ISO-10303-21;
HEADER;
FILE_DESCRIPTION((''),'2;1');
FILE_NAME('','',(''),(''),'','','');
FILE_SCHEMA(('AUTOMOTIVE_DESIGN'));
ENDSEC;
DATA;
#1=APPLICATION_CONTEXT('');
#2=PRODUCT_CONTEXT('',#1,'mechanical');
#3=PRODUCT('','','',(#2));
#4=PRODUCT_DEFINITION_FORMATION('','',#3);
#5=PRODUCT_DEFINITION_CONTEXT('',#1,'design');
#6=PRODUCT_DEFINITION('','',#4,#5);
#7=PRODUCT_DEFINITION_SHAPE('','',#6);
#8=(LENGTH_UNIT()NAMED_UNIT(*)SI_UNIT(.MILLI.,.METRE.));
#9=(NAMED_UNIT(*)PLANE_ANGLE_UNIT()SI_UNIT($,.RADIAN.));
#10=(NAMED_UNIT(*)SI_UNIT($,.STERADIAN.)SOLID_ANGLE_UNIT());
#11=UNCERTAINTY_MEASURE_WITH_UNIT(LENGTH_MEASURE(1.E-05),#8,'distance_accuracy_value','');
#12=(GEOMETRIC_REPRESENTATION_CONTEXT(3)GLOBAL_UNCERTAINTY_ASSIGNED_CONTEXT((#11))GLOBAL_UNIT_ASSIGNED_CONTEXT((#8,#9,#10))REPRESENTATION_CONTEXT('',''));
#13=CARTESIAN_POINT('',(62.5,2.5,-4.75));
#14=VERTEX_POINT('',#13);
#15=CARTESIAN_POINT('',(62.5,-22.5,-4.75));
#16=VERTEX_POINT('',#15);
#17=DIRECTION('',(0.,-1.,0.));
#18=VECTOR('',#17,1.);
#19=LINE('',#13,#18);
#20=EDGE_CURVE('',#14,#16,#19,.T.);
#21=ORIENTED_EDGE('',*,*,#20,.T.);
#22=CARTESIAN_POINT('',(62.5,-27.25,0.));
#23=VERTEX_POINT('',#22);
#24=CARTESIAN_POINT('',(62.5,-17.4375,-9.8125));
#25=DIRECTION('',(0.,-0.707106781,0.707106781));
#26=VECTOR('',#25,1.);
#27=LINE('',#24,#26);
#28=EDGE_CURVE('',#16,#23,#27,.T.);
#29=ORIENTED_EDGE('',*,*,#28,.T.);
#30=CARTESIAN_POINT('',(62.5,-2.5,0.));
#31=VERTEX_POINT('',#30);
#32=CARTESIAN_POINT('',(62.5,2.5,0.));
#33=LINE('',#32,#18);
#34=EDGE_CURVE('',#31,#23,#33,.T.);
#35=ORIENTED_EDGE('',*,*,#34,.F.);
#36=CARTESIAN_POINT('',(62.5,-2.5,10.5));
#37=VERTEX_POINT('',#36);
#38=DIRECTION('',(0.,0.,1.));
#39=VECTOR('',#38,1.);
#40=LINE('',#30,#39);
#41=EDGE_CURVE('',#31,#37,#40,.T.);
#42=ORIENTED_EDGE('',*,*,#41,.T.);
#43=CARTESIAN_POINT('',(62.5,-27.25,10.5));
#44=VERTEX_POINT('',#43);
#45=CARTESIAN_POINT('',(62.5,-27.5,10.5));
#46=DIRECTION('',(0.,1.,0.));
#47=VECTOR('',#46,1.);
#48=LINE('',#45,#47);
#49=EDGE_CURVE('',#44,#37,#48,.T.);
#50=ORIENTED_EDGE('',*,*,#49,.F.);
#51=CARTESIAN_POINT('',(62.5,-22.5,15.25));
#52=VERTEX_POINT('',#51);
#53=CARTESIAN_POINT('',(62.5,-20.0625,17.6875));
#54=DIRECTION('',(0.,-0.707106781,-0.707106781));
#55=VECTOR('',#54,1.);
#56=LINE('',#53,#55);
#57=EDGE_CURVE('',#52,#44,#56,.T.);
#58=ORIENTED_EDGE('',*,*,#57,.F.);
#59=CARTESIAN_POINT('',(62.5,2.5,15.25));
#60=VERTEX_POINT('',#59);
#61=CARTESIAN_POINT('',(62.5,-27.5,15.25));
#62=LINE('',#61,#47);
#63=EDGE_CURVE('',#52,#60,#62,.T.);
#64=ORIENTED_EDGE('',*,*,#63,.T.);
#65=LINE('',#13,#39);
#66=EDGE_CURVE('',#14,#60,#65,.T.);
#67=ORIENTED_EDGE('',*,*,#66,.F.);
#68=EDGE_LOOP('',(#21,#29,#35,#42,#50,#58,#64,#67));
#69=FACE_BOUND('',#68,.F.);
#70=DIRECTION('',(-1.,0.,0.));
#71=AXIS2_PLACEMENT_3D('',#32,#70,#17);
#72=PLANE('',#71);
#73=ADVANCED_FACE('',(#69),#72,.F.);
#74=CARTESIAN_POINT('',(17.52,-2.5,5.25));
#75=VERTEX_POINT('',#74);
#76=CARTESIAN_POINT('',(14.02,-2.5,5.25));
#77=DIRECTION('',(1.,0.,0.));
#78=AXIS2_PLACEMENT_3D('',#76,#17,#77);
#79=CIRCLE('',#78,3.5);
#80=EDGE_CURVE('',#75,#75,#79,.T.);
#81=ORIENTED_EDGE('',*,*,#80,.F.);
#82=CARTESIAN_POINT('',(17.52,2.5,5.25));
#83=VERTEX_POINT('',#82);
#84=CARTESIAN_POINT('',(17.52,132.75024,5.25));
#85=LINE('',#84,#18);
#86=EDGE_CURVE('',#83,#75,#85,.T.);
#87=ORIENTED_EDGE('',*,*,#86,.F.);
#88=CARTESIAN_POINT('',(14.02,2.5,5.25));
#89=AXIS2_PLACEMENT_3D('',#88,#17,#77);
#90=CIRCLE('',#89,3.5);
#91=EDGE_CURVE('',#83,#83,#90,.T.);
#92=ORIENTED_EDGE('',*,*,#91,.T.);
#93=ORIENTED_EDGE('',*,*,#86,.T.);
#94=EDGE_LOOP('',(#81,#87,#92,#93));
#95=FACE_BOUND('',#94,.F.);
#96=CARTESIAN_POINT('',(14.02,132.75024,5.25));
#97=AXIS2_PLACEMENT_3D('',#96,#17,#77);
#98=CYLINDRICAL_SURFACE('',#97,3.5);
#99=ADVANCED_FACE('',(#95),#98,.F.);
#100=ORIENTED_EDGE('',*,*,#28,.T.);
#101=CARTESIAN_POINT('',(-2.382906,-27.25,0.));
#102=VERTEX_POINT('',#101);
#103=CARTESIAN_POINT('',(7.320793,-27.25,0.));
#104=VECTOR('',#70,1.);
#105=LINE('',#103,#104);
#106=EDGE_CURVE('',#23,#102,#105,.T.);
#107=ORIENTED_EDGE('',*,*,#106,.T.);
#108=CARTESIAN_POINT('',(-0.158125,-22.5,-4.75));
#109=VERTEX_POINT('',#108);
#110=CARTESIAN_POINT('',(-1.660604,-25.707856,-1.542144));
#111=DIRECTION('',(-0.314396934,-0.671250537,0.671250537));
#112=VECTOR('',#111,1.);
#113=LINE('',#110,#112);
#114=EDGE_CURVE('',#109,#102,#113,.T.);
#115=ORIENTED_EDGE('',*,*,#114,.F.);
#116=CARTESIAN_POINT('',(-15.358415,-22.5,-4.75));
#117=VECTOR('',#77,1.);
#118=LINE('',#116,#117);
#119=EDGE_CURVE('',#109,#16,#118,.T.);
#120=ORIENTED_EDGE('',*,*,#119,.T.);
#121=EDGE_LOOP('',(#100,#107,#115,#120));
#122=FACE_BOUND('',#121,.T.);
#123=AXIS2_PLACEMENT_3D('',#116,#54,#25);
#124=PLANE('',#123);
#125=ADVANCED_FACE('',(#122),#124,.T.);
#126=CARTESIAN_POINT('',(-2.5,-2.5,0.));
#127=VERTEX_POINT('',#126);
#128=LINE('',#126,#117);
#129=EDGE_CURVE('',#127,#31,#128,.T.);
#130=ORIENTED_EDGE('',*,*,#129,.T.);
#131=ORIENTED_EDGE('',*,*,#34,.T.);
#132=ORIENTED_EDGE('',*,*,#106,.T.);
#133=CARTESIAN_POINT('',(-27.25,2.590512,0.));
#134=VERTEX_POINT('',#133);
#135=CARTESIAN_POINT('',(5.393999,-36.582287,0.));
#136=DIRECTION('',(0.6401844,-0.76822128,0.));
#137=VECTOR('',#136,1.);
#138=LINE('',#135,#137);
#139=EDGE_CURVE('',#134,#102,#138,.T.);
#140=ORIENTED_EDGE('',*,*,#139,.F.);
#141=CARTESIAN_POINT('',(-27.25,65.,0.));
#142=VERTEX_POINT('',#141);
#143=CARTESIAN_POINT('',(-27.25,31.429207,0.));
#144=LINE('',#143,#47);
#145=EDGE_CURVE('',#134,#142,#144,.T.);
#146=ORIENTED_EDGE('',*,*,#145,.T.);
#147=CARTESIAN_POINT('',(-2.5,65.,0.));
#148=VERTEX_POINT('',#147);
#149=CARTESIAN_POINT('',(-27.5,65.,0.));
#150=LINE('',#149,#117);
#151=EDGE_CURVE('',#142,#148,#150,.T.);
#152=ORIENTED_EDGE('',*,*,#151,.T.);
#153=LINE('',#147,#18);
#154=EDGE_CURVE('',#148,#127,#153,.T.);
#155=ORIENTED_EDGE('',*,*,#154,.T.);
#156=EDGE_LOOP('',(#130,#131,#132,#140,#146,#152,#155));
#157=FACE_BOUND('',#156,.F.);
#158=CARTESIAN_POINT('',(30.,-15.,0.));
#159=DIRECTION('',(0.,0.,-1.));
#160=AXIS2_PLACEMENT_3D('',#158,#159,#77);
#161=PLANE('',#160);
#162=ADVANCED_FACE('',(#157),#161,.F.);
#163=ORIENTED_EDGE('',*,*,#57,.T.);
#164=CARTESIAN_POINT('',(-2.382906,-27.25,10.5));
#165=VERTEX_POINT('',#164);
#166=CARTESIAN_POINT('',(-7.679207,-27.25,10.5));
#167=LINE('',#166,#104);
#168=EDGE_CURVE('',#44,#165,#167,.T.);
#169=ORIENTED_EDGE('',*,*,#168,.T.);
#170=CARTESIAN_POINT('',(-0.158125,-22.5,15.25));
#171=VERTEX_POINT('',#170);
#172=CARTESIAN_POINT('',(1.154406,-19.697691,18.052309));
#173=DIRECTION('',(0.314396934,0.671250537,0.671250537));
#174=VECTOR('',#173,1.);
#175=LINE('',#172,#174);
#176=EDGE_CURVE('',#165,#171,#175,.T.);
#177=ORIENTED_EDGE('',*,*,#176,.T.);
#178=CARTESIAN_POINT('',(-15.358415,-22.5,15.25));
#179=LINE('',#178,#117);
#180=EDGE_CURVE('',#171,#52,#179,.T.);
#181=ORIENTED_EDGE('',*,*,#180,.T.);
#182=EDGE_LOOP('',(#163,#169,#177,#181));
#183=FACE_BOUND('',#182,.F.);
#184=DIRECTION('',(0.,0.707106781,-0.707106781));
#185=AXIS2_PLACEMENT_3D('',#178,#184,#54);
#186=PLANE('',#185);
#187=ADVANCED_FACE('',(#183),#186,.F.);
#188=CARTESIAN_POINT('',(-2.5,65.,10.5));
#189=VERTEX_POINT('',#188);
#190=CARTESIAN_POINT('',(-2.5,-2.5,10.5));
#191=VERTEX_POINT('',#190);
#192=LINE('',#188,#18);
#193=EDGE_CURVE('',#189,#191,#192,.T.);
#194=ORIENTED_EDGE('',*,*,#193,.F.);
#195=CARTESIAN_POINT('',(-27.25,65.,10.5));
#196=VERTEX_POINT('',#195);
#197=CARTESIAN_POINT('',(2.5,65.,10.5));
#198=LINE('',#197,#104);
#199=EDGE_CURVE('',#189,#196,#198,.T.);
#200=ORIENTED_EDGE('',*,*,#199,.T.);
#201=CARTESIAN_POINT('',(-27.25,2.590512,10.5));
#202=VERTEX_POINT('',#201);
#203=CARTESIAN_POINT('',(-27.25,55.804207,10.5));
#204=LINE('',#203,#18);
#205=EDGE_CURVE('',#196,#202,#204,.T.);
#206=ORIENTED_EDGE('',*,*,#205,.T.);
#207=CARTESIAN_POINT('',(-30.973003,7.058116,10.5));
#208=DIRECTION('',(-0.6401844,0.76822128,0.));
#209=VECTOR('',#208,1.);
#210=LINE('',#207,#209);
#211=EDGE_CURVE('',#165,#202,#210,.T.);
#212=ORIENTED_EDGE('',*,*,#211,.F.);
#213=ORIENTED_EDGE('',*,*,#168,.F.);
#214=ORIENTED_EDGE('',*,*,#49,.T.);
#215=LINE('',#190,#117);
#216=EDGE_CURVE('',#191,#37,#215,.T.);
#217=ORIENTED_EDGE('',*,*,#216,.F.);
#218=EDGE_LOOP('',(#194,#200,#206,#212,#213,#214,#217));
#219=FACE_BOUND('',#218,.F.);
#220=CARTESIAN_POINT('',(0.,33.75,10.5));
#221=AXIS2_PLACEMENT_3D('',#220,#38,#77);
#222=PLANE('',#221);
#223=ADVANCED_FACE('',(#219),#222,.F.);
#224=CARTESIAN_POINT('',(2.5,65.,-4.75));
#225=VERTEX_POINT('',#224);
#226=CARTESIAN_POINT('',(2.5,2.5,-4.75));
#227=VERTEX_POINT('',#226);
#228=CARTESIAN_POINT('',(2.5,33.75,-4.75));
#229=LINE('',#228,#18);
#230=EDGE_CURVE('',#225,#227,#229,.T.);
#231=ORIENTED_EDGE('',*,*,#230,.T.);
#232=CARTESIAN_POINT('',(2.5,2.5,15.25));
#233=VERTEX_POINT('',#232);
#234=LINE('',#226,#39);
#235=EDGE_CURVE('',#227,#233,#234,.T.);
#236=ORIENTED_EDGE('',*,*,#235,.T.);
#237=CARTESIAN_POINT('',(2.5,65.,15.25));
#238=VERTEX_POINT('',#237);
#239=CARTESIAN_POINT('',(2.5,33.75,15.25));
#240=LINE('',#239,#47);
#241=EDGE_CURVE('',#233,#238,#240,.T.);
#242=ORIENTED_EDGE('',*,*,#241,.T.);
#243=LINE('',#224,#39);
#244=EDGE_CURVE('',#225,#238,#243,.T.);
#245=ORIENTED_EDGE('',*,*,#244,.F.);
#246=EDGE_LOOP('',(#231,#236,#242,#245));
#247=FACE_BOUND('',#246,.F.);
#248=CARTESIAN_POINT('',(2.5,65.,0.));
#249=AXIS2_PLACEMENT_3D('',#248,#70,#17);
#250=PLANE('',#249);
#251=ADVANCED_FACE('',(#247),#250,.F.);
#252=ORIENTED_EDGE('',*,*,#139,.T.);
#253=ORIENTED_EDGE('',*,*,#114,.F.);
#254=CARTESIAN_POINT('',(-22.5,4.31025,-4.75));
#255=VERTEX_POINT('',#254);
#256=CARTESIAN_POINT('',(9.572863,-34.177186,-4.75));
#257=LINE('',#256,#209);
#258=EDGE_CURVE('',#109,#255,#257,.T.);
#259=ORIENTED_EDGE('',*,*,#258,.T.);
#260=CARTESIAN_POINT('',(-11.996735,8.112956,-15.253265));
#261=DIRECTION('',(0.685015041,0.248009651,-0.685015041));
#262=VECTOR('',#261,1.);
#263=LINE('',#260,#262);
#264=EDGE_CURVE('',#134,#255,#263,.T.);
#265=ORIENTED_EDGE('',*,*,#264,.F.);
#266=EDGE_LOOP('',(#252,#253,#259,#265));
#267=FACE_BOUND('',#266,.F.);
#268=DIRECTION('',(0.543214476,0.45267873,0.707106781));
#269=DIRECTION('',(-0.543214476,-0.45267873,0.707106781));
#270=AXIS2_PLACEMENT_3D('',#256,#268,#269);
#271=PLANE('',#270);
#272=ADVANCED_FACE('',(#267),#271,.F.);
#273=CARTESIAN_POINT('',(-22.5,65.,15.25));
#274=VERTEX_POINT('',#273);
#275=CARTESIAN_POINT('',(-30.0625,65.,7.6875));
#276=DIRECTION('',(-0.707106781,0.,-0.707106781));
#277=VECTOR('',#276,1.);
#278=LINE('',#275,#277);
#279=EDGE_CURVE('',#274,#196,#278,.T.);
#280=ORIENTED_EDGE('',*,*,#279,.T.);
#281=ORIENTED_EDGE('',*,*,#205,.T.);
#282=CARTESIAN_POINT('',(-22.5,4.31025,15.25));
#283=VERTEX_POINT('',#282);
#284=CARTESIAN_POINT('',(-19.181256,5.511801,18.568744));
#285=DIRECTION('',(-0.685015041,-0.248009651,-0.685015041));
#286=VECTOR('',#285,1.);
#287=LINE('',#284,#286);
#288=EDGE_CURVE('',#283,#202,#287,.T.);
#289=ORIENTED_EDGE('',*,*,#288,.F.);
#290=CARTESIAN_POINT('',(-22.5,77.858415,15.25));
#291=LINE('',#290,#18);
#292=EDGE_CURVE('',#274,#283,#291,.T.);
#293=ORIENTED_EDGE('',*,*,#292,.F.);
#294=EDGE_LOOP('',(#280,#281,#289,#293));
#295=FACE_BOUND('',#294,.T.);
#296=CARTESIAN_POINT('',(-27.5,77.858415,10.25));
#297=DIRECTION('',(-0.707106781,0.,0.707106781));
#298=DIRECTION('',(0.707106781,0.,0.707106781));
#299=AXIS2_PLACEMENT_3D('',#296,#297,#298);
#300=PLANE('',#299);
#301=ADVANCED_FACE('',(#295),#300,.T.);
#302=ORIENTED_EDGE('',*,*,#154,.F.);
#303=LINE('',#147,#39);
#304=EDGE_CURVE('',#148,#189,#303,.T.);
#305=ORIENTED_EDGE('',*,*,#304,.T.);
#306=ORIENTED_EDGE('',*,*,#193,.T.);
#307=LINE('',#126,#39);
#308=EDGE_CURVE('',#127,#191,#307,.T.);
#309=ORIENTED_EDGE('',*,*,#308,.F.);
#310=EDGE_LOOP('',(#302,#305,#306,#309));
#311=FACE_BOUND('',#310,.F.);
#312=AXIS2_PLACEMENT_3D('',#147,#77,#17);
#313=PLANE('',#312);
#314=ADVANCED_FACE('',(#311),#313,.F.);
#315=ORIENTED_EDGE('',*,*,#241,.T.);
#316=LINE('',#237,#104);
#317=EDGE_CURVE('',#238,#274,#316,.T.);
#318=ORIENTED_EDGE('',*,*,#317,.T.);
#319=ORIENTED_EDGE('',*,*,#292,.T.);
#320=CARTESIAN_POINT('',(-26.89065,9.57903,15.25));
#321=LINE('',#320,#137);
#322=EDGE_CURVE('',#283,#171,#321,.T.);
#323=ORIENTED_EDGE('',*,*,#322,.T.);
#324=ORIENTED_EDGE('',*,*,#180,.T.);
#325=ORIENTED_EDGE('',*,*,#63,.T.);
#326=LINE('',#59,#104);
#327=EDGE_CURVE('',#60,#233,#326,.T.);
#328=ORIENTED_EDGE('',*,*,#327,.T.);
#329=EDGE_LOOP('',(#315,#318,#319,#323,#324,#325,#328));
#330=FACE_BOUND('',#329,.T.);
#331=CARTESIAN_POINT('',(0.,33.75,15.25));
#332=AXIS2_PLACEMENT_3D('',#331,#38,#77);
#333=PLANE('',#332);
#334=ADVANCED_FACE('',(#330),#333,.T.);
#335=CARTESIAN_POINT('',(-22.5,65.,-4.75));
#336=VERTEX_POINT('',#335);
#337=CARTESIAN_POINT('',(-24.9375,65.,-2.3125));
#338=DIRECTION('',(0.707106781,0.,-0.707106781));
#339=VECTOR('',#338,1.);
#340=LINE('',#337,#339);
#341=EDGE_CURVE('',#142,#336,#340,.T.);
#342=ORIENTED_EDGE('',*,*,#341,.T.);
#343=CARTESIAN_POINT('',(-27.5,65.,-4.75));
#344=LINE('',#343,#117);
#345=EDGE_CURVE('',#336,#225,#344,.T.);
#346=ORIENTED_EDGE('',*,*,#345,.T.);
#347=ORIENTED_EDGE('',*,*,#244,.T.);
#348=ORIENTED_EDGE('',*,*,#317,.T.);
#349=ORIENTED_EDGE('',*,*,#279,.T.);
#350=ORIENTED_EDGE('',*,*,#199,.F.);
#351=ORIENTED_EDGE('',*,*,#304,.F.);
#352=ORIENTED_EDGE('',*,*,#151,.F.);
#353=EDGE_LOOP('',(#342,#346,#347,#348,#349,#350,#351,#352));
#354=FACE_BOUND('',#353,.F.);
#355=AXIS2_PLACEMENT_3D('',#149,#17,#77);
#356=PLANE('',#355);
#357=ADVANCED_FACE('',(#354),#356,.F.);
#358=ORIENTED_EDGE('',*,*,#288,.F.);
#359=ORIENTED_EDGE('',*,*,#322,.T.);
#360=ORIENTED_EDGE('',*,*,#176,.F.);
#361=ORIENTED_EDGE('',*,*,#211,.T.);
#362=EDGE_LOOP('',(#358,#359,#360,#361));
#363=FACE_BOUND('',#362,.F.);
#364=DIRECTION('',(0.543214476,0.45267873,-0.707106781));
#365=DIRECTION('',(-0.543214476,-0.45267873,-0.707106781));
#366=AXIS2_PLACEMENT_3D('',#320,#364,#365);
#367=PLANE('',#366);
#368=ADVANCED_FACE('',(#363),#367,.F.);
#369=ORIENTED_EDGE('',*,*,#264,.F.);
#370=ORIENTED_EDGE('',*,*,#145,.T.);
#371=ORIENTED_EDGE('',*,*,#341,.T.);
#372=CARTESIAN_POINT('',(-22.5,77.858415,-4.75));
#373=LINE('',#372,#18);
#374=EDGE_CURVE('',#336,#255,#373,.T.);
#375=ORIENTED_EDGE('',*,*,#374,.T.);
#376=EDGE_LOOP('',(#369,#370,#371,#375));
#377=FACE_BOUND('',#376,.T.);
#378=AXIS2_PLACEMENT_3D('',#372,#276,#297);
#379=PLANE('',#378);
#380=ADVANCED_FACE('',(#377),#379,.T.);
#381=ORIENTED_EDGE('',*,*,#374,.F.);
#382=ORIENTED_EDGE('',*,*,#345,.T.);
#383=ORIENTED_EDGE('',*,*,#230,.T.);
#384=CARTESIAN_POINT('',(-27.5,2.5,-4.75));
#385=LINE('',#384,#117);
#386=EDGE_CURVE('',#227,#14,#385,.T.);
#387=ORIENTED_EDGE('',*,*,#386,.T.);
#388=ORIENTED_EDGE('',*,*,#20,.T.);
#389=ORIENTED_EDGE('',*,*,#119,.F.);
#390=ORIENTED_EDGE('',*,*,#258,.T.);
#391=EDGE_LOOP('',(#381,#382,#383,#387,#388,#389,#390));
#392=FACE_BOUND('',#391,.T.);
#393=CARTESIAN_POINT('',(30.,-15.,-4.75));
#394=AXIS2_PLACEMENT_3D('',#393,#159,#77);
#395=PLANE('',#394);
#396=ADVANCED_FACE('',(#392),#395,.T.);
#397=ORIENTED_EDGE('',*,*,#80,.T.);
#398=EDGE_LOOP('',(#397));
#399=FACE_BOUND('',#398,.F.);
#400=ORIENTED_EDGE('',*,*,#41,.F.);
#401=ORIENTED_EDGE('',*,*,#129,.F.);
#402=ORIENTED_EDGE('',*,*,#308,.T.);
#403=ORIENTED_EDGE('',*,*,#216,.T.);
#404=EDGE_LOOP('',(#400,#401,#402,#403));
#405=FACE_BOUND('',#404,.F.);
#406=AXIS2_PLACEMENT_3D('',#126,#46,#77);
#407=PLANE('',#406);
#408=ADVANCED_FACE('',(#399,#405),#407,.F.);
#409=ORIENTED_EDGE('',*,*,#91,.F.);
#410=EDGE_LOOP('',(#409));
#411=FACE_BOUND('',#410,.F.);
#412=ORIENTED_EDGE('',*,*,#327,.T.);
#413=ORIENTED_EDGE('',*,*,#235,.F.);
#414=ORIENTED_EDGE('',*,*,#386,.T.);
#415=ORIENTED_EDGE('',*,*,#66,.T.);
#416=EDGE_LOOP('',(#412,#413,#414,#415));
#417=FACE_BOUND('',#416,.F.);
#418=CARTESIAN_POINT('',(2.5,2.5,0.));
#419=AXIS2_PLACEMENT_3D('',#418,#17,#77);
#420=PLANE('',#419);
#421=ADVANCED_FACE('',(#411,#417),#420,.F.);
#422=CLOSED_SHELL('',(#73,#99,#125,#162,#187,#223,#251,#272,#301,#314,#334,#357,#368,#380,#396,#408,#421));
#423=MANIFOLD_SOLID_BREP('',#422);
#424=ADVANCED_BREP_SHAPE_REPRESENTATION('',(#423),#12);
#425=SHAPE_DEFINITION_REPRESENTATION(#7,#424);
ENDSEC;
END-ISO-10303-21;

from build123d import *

# Parameters (mm, degrees)
F0_W        = 5
F0_H        = 62.5
F0_H_2      = 5
F0_W_2      = 60
F1_DEPTH    = 10.5
F2_W        = 5
F2_H        = 62.5
F2_W_2      = 25
F2_W_3      = 65
F2_H_2      = 25
F3_DEPTH    = 4.75
F4_W        = 65
F4_H        = 25
F4_W_2      = 5
F4_H_2      = 62.5
F4_W_3      = 25
F5_DEPTH    = 4.75
F6_T1_DEPTH = 88.2168298797
F7_T1_DEPTH = 56.9578285833
F7_T3_DEPTH = 90.7168298797
F7_T5_DEPTH = 88.2168298797
F7_T7_DEPTH = 64.7680782592
F9_D        = 7


# Not quite as in the source:
# - a fillet or chamfer that OpenCascade refuses, or shapes differently, is made with other operations: its cross-section is extruded or revolved along the edge and cut away or added


with BuildPart() as f1:
    # F0 (on Top) → F1 (new body)
    with BuildSketch(Plane.XY):
        with Locations((0, 33.75)):
            Rectangle(F0_W, F0_H)
        Rectangle(F0_W, F0_H_2)
        with Locations((32.5, 0)):
            Rectangle(F0_W_2, F0_H_2)
    extrude(amount=F1_DEPTH)

    # F2 (on face) → F3 (join)
    with BuildSketch(Plane.XY.offset(10.5)):
        with Locations((0, 33.75)):
            Rectangle(F2_W, F2_H)
        Polygon((2.5, 2.5), (-2.5, 2.5), (-2.5, -2.5), (62.5, -2.5), (62.5, 2.5), align=None)
        Polygon((-2.5, -2.5), (-2.5, 2.5), (-27.5, 2.5), (-2.5, -27.5), align=None)
        with Locations((-15, 33.75)):
            Rectangle(F2_W_2, F2_H)
        with Locations((30, -15)):
            Rectangle(F2_W_3, F2_H_2)
    extrude(amount=F3_DEPTH)

    # F4 (on face) → F5 (join)
    with BuildSketch(Plane(origin=(0, 0, 0), x_dir=(1, 0, 0), z_dir=(0, 0, -1))):
        with Locations((30, 15)):
            Rectangle(F4_W, F4_H)
        Polygon((2.5, -2.5), (62.5, -2.5), (62.5, 2.5), (-2.5, 2.5), (-2.5, -2.5), align=None)
        Polygon((-27.5, -2.5), (-2.5, -2.5), (-2.5, 2.5), (-2.5, 27.5), align=None)
        with Locations((0, -33.75)):
            Rectangle(F4_W_2, F4_H_2)
        with Locations((-15, -33.75)):
            Rectangle(F4_W_3, F4_H_2)
    extrude(amount=F5_DEPTH)

    # F6: chamfer of 5 on 1 edges, made by hand

    # F6_s2 → F6_t1 (cut)
    with BuildSketch(Plane.XZ.offset(-77.8584149398)):
        Polygon((-27.5, 10.25), (-22.5, 15.25), (-27.5, 15.25), align=None)
    extrude(amount=F6_T1_DEPTH, mode=Mode.SUBTRACT)

    # F7: chamfer of 5 on 5 edges, made by hand

    # F7_s2 → F7_t1 (cut)
    with BuildSketch(Plane(origin=(-15.7317566489, 18.8781079787, 0), x_dir=(0, 0, 1), z_dir=(0.6401843997, -0.7682212796, 0))):
        Polygon((15.25, 14.5256241898), (10.25, 19.5256241898), (15.25, 19.5256241898), align=None)
    extrude(amount=F7_T1_DEPTH, mode=Mode.SUBTRACT)

    # F7_s4 → F7_t3 (cut)
    with BuildSketch(Plane.YZ.offset(-15.3584149398)):
        Polygon((-22.5, 15.25), (-27.5, 10.25), (-27.5, 15.25), align=None)
        Polygon((-22.5, -4.75), (-27.5, 0.25), (-27.5, -4.75), align=None)
    extrude(amount=F7_T3_DEPTH, mode=Mode.SUBTRACT)

    # F7_s6 → F7_t5 (cut)
    with BuildSketch(Plane.XZ.offset(-77.8584149398)):
        Polygon((-22.5, -4.75), (-27.5, 0.25), (-27.5, -4.75), align=None)
    extrude(amount=F7_T5_DEPTH, mode=Mode.SUBTRACT)

    # F7_s8 → F7_t7 (cut)
    with BuildSketch(Plane(origin=(20.7317566489, -24.8781079787, 0), x_dir=(0, 0, 1), z_dir=(-0.6401843997, 0.7682212796, 0))):
        Polygon((-4.75, -14.5256241898), (0.25, -19.5256241898), (-4.75, -19.5256241898), align=None)
    extrude(amount=F7_T7_DEPTH, mode=Mode.SUBTRACT)

    # F9 (through all)
    with Locations(Plane(origin=(0, 2.5, 0), x_dir=(-1, 0, 0), z_dir=(0, 1, 0))):
        with Locations((-14.02, 5.25)):
            Hole(F9_D / 2)


solid = f1.part
